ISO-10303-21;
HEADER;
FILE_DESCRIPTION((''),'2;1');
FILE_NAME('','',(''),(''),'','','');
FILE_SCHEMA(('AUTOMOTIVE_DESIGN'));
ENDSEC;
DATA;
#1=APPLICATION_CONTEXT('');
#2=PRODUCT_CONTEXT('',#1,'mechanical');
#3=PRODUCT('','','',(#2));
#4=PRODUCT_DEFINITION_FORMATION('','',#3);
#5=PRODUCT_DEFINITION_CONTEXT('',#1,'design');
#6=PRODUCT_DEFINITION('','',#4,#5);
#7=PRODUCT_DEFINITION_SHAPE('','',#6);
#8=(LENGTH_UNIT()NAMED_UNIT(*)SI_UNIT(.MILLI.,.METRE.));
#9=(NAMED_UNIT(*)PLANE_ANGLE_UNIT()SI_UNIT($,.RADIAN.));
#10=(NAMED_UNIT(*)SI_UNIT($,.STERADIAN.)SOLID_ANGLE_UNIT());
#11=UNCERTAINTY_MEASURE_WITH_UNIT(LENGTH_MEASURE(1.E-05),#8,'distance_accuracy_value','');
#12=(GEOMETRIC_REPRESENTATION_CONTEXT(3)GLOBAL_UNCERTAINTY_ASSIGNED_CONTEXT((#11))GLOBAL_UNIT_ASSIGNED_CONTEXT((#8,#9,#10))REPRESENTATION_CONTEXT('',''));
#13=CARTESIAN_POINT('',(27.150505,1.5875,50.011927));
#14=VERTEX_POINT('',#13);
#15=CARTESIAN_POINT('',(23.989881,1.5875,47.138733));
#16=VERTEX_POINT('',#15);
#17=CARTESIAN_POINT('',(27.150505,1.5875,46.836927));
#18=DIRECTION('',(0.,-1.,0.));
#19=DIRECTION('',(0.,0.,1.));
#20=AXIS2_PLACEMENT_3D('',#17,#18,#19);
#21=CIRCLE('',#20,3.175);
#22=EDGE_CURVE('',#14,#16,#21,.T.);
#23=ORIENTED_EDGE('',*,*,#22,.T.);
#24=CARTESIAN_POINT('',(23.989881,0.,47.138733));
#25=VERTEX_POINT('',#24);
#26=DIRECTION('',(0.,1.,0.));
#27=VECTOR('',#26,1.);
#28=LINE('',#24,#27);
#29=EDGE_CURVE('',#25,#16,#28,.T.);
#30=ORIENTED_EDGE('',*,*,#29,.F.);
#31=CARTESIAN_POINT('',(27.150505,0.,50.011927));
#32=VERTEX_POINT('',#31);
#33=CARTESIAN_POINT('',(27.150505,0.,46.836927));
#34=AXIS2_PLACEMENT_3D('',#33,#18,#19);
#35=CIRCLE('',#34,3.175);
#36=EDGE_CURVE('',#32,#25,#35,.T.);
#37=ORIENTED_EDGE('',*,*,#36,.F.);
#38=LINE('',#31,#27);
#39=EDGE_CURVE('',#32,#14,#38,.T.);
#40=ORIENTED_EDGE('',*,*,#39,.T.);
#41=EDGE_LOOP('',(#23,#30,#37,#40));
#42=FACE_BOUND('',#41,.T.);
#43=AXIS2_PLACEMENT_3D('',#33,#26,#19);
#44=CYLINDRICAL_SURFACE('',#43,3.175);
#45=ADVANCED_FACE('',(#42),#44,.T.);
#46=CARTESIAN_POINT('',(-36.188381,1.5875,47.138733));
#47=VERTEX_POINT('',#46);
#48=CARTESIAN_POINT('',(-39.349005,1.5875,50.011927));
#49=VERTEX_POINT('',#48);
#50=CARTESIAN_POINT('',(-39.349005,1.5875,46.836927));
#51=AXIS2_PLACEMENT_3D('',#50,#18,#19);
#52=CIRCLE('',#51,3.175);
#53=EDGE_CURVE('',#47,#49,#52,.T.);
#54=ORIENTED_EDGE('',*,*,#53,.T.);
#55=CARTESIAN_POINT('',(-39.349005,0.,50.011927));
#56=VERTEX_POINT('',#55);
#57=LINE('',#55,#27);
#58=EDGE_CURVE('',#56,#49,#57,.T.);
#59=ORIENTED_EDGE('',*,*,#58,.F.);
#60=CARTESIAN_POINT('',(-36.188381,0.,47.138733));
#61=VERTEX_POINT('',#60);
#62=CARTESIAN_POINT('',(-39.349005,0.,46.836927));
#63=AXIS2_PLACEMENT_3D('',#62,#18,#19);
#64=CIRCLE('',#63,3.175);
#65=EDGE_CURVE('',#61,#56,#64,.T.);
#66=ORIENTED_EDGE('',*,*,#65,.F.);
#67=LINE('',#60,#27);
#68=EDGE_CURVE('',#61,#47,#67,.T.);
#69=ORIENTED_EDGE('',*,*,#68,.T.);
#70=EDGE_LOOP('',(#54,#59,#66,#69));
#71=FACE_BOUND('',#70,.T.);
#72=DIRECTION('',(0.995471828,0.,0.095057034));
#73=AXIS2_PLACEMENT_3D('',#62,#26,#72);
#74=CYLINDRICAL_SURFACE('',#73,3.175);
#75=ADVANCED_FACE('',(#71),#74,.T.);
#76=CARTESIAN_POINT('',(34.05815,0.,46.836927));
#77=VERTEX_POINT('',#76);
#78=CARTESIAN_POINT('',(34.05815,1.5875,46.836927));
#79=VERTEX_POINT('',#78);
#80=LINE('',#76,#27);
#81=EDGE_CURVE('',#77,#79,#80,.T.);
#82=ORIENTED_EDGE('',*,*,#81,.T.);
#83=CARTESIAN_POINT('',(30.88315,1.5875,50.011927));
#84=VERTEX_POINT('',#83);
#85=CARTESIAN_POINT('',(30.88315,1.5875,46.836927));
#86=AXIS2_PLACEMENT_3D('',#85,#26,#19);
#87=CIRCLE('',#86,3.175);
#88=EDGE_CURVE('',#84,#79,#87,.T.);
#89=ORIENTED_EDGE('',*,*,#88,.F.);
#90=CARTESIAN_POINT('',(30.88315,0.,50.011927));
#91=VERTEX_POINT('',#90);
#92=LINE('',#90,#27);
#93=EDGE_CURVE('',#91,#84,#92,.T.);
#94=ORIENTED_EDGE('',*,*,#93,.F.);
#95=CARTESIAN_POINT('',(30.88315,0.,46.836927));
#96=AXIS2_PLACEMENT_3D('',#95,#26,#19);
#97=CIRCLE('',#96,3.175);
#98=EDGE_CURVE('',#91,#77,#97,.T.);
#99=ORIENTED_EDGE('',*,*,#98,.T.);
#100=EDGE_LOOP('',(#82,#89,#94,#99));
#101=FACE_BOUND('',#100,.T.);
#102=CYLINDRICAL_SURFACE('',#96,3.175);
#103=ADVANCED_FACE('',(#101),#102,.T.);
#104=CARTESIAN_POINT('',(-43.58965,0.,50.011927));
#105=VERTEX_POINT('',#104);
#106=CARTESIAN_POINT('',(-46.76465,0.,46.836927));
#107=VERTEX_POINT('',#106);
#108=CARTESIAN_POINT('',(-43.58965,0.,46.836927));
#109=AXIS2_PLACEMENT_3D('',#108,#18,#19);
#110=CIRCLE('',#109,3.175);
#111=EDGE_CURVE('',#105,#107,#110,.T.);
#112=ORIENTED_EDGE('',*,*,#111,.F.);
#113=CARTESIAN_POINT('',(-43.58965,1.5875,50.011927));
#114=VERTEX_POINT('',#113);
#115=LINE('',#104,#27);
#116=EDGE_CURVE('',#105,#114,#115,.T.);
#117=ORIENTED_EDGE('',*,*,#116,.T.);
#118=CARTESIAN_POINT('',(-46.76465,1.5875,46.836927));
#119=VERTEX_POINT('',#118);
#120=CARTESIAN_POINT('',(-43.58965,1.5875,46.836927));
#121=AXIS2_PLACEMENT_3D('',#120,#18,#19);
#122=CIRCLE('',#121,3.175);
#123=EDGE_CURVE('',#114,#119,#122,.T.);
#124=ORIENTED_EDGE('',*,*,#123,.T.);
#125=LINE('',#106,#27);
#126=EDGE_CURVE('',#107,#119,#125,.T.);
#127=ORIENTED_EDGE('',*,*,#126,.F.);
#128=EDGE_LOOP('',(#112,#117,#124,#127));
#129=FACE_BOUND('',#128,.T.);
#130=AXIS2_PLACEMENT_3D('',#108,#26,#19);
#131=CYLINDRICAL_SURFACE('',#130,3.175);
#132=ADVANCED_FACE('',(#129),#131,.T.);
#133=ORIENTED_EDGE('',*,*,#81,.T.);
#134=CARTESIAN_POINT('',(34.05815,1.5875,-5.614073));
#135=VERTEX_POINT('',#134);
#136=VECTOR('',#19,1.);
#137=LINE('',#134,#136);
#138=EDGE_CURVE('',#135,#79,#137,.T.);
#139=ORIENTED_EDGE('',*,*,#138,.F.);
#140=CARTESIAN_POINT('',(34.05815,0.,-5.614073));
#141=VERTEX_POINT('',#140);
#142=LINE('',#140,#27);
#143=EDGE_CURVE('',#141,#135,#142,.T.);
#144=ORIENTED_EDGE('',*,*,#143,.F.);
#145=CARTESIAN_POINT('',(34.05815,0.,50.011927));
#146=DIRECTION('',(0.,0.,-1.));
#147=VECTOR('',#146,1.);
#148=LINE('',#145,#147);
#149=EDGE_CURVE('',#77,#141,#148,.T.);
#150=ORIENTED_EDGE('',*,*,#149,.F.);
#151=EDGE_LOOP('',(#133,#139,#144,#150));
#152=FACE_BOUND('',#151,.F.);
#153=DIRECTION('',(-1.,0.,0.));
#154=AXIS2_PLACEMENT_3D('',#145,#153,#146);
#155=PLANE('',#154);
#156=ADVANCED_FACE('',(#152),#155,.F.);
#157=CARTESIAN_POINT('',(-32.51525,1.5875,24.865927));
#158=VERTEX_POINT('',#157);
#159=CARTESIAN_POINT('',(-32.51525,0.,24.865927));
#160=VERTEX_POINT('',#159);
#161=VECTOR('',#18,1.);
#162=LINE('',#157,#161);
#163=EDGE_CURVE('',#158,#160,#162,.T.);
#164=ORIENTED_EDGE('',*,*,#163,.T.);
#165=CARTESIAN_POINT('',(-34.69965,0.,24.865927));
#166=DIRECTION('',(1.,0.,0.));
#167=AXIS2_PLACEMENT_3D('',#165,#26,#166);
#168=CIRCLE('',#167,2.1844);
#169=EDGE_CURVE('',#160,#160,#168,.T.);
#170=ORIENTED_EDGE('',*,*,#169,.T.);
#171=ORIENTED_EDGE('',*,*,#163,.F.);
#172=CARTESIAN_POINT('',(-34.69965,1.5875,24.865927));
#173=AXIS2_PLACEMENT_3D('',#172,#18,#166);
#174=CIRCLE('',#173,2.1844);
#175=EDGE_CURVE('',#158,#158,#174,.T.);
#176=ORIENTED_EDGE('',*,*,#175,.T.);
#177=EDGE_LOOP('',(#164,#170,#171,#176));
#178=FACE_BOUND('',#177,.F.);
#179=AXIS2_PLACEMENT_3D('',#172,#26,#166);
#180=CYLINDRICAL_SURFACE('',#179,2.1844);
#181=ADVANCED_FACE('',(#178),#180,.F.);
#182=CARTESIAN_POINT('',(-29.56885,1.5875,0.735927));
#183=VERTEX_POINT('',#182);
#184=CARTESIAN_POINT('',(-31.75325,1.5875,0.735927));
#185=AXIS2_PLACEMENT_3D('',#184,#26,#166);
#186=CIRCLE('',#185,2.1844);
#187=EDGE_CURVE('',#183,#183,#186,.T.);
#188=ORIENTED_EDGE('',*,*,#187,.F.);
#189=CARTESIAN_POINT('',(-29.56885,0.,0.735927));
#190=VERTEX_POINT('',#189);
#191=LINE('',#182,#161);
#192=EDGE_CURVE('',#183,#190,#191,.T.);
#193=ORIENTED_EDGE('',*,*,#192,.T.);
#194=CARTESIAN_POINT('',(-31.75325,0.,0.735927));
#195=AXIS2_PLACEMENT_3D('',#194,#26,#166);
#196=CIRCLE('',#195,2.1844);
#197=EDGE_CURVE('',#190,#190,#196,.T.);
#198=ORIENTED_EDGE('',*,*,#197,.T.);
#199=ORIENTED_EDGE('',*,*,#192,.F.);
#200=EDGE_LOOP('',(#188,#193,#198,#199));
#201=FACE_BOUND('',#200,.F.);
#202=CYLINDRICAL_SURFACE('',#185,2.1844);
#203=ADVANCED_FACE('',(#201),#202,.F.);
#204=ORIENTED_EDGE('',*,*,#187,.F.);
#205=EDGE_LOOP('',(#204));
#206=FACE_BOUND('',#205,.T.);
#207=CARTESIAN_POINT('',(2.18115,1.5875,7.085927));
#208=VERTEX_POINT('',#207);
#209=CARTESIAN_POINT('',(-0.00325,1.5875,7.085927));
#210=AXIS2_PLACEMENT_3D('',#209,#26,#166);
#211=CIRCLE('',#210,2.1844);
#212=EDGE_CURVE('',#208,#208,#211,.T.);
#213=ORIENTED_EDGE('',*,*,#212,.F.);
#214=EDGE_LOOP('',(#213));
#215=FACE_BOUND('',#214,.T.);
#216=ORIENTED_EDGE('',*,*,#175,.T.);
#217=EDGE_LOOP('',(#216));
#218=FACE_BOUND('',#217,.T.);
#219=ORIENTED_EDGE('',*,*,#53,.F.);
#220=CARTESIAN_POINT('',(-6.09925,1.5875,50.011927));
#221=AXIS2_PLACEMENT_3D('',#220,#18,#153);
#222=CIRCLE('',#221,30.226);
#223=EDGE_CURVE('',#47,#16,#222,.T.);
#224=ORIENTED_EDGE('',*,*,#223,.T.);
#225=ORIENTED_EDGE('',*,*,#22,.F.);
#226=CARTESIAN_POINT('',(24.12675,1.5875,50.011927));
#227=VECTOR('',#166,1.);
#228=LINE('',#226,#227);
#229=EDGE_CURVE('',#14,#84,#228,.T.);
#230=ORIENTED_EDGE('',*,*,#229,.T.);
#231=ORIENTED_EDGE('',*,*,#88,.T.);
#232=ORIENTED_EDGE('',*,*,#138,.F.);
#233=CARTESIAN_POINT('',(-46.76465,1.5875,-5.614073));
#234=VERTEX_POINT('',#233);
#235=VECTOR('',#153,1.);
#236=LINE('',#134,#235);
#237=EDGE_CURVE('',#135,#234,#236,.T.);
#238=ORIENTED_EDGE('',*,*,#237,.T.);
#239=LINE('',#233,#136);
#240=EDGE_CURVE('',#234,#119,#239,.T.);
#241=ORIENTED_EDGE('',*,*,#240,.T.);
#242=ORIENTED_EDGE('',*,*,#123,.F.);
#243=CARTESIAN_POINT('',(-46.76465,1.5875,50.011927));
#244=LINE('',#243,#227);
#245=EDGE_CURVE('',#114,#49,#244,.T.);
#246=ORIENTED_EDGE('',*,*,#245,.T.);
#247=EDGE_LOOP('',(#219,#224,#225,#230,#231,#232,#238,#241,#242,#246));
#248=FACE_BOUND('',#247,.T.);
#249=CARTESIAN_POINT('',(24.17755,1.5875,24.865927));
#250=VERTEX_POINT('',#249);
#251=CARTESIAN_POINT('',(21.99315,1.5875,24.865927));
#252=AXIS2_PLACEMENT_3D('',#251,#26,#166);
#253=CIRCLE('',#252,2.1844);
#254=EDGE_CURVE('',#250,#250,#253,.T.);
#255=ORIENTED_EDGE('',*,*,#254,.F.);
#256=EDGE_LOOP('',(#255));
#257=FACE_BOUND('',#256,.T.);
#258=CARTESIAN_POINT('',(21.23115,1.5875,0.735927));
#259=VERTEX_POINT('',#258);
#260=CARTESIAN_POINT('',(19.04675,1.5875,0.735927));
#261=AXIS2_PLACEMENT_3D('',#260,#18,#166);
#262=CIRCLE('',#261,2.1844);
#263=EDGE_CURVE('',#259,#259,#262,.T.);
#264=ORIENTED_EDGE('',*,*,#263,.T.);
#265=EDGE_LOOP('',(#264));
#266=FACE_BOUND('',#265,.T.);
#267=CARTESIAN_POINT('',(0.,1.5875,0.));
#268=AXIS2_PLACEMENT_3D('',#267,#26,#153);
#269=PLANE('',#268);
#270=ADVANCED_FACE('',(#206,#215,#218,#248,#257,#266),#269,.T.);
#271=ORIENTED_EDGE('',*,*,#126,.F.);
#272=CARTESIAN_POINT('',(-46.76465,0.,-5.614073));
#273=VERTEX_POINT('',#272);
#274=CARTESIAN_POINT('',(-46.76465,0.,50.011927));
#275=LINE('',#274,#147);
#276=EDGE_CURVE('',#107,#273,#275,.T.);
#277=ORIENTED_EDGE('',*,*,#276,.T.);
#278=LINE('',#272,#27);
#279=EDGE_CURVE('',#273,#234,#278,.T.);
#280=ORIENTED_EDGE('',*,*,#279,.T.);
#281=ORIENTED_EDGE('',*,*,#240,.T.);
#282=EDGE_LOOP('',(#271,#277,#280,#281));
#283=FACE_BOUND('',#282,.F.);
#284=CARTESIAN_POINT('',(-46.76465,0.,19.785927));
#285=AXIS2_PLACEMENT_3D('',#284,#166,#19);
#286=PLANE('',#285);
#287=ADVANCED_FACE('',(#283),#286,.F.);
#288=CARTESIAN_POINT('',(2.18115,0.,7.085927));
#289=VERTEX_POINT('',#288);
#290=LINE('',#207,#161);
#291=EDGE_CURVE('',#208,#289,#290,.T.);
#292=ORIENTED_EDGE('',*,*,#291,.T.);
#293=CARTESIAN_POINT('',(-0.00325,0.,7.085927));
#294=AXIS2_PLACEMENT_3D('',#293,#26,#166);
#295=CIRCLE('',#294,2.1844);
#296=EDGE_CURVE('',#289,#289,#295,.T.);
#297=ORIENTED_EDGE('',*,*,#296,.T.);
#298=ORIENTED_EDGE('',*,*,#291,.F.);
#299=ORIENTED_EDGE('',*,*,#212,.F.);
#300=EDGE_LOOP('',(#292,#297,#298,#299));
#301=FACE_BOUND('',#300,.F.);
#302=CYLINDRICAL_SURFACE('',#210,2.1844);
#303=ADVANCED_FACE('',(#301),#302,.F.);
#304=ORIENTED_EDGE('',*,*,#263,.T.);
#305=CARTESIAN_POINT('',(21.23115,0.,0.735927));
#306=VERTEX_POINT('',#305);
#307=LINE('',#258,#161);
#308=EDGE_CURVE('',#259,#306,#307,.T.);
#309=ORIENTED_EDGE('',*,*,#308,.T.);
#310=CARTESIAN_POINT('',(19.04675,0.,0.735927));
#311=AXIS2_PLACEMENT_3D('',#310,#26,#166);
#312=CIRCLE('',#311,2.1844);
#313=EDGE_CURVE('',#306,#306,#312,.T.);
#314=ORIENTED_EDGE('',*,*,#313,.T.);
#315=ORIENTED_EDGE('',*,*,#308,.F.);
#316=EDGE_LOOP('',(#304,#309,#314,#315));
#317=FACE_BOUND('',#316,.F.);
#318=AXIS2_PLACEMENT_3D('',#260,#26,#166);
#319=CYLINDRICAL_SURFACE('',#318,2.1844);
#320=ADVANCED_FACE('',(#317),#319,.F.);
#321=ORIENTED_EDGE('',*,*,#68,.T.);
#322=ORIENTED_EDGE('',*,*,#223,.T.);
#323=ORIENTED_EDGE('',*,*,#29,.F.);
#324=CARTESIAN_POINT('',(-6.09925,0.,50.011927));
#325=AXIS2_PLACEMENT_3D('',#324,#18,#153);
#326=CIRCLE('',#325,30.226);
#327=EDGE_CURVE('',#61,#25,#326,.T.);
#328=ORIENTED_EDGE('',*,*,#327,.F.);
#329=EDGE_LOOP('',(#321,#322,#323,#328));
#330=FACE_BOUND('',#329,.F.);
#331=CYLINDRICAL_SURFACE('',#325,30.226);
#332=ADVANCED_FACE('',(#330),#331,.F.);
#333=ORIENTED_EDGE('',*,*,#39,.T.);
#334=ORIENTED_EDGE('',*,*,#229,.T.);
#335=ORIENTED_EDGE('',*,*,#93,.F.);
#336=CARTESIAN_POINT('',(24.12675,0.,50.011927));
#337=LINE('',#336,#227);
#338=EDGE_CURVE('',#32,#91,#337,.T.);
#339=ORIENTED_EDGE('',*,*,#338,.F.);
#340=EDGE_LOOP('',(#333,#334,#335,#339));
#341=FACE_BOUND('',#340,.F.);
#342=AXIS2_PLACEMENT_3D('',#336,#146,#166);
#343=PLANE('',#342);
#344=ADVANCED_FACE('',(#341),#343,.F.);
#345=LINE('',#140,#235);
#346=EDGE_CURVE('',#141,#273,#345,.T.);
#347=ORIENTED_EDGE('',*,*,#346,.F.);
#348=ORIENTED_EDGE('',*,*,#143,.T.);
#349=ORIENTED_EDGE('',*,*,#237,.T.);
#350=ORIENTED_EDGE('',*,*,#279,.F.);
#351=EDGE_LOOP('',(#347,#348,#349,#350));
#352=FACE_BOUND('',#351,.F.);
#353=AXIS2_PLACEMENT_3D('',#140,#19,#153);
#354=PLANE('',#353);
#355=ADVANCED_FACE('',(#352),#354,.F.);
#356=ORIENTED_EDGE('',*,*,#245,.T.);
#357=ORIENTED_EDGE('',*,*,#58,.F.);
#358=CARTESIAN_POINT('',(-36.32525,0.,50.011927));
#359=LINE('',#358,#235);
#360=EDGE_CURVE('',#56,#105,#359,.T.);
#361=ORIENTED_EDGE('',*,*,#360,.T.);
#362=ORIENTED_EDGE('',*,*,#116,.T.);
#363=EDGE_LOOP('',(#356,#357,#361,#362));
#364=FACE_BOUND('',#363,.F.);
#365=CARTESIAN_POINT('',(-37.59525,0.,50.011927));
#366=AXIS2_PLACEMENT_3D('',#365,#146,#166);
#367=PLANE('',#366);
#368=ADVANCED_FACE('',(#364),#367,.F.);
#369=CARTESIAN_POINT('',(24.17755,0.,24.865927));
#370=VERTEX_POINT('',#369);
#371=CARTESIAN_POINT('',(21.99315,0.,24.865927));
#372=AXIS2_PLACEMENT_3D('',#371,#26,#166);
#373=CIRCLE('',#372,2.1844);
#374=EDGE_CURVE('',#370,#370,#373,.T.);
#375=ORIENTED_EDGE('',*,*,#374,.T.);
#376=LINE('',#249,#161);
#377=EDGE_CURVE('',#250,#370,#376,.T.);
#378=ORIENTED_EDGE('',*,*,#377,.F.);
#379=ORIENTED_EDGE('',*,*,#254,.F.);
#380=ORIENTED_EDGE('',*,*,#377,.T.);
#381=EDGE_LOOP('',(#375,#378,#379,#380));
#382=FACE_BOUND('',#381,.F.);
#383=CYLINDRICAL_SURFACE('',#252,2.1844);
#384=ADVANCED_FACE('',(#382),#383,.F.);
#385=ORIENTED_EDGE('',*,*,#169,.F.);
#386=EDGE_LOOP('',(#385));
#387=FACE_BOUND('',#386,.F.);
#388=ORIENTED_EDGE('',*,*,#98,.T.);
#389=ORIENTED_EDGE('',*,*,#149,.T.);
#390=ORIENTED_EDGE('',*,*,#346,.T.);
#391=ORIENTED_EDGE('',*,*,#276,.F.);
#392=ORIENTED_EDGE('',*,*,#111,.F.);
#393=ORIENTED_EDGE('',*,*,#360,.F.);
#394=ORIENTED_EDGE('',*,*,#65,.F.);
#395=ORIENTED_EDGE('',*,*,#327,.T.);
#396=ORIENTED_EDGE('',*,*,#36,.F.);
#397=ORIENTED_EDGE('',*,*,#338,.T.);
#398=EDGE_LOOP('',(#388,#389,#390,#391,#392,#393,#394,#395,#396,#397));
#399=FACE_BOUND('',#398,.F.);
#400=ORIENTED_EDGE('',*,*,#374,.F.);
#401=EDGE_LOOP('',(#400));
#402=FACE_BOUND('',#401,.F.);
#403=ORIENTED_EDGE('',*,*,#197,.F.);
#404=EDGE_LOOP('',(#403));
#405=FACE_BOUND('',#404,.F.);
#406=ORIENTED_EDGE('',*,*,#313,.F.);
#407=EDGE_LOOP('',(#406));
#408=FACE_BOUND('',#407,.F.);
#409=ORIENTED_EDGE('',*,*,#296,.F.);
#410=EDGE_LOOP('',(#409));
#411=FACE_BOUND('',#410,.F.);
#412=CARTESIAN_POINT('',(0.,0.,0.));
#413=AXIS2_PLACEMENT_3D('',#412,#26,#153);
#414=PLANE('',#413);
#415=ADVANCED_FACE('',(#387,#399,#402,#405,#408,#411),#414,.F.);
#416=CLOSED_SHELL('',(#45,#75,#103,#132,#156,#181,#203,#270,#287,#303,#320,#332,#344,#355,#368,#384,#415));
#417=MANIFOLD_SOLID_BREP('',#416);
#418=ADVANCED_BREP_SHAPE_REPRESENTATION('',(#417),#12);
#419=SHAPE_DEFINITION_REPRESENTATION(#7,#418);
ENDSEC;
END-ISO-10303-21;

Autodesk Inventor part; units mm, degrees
ref_plane "YZ Plane" through (0, 0, 0) normal (1, 0, 0) x (0, 1, 0)
ref_plane "XZ Plane" through (0, 0, 0) normal (0, 1, 0) x (-1, 0, 0)
ref_plane "XY Plane" through (0, 0, 0) normal (0, 0, 1) x (1, 0, 0)
sketch "Sketch1" plane through (0, 0, 0) normal (0, 1, 0) x (-1, 0, 0)
  line L0 (46.76465, 19.785927) -> (46.76465, -5.614073)
  line L1 (46.76465, -5.614073) -> (-34.05815, -5.614073)
  line L2 (-34.05815, -5.614073) -> (-34.05815, 19.785927)
  line L3 (-34.05815, 19.785927) -> (46.76465, -5.614073) construction
  line L4 (46.76465, 19.785927) -> (-34.05815, -5.614073) construction
  line L5 (-34.05815, 19.785927) -> (-34.05815, 50.011927)
  line L6 (46.76465, 19.785927) -> (46.76465, 50.011927)
  line L7 (46.76465, 19.785927) -> (-34.05815, 19.785927)
  line L8 (46.76465, 19.785927) -> (6.35325, 19.785927)
  line L9 (46.76465, 50.011927) -> (37.59525, 50.011927)
  line L10 (-23.87275, 50.011927) -> (-34.05815, 50.011927)
  line L11 (37.59525, 50.011927) -> (36.32525, 50.011927)
  arc A0 (-24.12675, 50.011927) -> (36.32525, 50.011927) centre (6.09925, 50.011927) ccw
  point P0 (6.35325, 7.085927)
  dimension "d11" = 80.8228
  dimension "d12" = 25.4
  dimension "d13" = 30.226
  dimension "d14" = 30.226
  dimension "d40" = 40.4114
  dimension "d46" = 60.452
sketch "Sketch1 outline for Extrusion3" plane through (0, 0, 0) normal (0, 1, 0) x (-1, 0, 0)
  line L0 (-34.05815, 50.011927) -> (-34.05815, 19.785927)
  line L1 (-24.12675, 50.011927) -> (-34.05815, 50.011927)
  arc A0 (36.32525, 50.011927) -> (-24.12675, 50.011927) centre (6.09925, 50.011927) cw
  line L2 (37.59525, 50.011927) -> (36.32525, 50.011927)
  line L3 (46.76465, 50.011927) -> (37.59525, 50.011927)
  line L4 (46.76465, 19.785927) -> (46.76465, 50.011927)
  line L5 (46.76465, -5.614073) -> (46.76465, 19.785927)
  line L6 (-34.05815, -5.614073) -> (46.76465, -5.614073)
  line L7 (-34.05815, 19.785927) -> (-34.05815, -5.614073)
extrude "Extrusion3" add sketch "Sketch1 outline for Extrusion3" along normal blind 1.5875
sketch "Sketch2" plane through (0, 1.5875, 0) normal (0, 1, 0) x (1, 0, 0)
  line L0 (34.05815, 5.614073) -> (-46.76465, 5.614073)
  line L1 (34.05815, 5.614073) -> (34.05815, -19.785927)
  line L2 (34.05815, -50.011927) -> (34.05815, 5.614073)
  line L3 (34.05815, 5.614073) -> (34.05815, -0.735927)
  line L4 (34.05815, -0.735927) -> (19.04675, -0.735927)
  circle A0 centre (19.04675, -0.735927) radius 2.1844
  line L5 (34.05815, 5.614073) -> (34.05815, -7.085927)
  line L6 (34.05815, -7.085927) -> (-0.00325, -7.085927)
  circle A1 centre (-0.00325, -7.085927) radius 2.1844
  line L7 (19.04675, -0.735927) -> (-31.75325, -0.735927)
  circle A2 centre (-31.75325, -0.735927) radius 2.1844
  arc A3 (-46.76465, -56.057127) -> (-44.93585, -57.885927) centre (-44.93585, -56.057127) ccw
  arc A4 (32.22935, -57.885927) -> (34.05815, -56.057127) centre (32.22935, -56.057127) ccw
  line L8 (34.05815, -19.785927) -> (-46.76465, -19.785927)
  line L9 (-46.76465, 5.614073) -> (-46.76465, -50.011927)
  line L10 (34.05815, -19.785927) -> (34.05815, -24.865927)
  line L11 (34.05815, -24.865927) -> (21.99315, -24.865927)
  circle A5 centre (21.99315, -24.865927) radius 2.1844
  line L12 (-46.76465, -19.785927) -> (-46.76465, -24.865927)
  line L13 (-46.76465, -24.865927) -> (-34.69965, -24.865927)
  circle A6 centre (-34.69965, -24.865927) radius 2.1844
  point P0 (0, 0)
  point P1 (-31.057127, -40.306856)
  point P2 (31.050628, -40.30613)
  point P3 (-43.267434, -44.121852)
  point P4 (30.560934, -44.122114)
  dimension "d18" = 25.4
  dimension "d19" = 6.35
  dimension "d20" = 15.0114
  dimension "d21" = 4.3688
  dimension "d22" = 12.7
  dimension "d23" = 34.0614
  dimension "d24" = 4.3688
  dimension "d25" = 50.8
  dimension "d26" = 4.3688
  dimension "d30" = 5.08
  dimension "d31" = 12.065
  dimension "d32" = 4.3688
  dimension "d33" = 5.08
  dimension "d34" = 12.065
  dimension "d35" = 4.3688
extrude "Extrusion4" cut sketch "Sketch2" against normal blind 1.5875 contours A0 L7 L4 | L4 L7 A0 | A1 | A2 | A5 | A6
fillet "Fillet2" radius 3.175 4 edges at (-46.7646, 0.7937, 50.0119) (34.0582, 0.7937, 50.0119) (-36.3252, 0.7937, 50.0119) (24.1268, 0.7937, 50.0119)
equation "\"d31\" = d34"
equation "\"BendRadius\" = Thickness"
equation "\"BendReliefWidth\" = Thickness"
equation "\"BendReliefDepth\" = 0.5 * Thickness"
equation "\"CornerReliefSize\" = 4 * Thickness"
equation "\"MinimumRemnant\" = 2 * Thickness"
equation "\"TransitionRadius\" = BendRadius"
equation "\"JacobiRadiusSize\" = BendRadius"
equation "\"GapSize\" = Thickness"
equation "\"Thickness\" = 1.5875"
properties part number "Winter-Climb-Guides" material "Polycarbonate, Clear"
